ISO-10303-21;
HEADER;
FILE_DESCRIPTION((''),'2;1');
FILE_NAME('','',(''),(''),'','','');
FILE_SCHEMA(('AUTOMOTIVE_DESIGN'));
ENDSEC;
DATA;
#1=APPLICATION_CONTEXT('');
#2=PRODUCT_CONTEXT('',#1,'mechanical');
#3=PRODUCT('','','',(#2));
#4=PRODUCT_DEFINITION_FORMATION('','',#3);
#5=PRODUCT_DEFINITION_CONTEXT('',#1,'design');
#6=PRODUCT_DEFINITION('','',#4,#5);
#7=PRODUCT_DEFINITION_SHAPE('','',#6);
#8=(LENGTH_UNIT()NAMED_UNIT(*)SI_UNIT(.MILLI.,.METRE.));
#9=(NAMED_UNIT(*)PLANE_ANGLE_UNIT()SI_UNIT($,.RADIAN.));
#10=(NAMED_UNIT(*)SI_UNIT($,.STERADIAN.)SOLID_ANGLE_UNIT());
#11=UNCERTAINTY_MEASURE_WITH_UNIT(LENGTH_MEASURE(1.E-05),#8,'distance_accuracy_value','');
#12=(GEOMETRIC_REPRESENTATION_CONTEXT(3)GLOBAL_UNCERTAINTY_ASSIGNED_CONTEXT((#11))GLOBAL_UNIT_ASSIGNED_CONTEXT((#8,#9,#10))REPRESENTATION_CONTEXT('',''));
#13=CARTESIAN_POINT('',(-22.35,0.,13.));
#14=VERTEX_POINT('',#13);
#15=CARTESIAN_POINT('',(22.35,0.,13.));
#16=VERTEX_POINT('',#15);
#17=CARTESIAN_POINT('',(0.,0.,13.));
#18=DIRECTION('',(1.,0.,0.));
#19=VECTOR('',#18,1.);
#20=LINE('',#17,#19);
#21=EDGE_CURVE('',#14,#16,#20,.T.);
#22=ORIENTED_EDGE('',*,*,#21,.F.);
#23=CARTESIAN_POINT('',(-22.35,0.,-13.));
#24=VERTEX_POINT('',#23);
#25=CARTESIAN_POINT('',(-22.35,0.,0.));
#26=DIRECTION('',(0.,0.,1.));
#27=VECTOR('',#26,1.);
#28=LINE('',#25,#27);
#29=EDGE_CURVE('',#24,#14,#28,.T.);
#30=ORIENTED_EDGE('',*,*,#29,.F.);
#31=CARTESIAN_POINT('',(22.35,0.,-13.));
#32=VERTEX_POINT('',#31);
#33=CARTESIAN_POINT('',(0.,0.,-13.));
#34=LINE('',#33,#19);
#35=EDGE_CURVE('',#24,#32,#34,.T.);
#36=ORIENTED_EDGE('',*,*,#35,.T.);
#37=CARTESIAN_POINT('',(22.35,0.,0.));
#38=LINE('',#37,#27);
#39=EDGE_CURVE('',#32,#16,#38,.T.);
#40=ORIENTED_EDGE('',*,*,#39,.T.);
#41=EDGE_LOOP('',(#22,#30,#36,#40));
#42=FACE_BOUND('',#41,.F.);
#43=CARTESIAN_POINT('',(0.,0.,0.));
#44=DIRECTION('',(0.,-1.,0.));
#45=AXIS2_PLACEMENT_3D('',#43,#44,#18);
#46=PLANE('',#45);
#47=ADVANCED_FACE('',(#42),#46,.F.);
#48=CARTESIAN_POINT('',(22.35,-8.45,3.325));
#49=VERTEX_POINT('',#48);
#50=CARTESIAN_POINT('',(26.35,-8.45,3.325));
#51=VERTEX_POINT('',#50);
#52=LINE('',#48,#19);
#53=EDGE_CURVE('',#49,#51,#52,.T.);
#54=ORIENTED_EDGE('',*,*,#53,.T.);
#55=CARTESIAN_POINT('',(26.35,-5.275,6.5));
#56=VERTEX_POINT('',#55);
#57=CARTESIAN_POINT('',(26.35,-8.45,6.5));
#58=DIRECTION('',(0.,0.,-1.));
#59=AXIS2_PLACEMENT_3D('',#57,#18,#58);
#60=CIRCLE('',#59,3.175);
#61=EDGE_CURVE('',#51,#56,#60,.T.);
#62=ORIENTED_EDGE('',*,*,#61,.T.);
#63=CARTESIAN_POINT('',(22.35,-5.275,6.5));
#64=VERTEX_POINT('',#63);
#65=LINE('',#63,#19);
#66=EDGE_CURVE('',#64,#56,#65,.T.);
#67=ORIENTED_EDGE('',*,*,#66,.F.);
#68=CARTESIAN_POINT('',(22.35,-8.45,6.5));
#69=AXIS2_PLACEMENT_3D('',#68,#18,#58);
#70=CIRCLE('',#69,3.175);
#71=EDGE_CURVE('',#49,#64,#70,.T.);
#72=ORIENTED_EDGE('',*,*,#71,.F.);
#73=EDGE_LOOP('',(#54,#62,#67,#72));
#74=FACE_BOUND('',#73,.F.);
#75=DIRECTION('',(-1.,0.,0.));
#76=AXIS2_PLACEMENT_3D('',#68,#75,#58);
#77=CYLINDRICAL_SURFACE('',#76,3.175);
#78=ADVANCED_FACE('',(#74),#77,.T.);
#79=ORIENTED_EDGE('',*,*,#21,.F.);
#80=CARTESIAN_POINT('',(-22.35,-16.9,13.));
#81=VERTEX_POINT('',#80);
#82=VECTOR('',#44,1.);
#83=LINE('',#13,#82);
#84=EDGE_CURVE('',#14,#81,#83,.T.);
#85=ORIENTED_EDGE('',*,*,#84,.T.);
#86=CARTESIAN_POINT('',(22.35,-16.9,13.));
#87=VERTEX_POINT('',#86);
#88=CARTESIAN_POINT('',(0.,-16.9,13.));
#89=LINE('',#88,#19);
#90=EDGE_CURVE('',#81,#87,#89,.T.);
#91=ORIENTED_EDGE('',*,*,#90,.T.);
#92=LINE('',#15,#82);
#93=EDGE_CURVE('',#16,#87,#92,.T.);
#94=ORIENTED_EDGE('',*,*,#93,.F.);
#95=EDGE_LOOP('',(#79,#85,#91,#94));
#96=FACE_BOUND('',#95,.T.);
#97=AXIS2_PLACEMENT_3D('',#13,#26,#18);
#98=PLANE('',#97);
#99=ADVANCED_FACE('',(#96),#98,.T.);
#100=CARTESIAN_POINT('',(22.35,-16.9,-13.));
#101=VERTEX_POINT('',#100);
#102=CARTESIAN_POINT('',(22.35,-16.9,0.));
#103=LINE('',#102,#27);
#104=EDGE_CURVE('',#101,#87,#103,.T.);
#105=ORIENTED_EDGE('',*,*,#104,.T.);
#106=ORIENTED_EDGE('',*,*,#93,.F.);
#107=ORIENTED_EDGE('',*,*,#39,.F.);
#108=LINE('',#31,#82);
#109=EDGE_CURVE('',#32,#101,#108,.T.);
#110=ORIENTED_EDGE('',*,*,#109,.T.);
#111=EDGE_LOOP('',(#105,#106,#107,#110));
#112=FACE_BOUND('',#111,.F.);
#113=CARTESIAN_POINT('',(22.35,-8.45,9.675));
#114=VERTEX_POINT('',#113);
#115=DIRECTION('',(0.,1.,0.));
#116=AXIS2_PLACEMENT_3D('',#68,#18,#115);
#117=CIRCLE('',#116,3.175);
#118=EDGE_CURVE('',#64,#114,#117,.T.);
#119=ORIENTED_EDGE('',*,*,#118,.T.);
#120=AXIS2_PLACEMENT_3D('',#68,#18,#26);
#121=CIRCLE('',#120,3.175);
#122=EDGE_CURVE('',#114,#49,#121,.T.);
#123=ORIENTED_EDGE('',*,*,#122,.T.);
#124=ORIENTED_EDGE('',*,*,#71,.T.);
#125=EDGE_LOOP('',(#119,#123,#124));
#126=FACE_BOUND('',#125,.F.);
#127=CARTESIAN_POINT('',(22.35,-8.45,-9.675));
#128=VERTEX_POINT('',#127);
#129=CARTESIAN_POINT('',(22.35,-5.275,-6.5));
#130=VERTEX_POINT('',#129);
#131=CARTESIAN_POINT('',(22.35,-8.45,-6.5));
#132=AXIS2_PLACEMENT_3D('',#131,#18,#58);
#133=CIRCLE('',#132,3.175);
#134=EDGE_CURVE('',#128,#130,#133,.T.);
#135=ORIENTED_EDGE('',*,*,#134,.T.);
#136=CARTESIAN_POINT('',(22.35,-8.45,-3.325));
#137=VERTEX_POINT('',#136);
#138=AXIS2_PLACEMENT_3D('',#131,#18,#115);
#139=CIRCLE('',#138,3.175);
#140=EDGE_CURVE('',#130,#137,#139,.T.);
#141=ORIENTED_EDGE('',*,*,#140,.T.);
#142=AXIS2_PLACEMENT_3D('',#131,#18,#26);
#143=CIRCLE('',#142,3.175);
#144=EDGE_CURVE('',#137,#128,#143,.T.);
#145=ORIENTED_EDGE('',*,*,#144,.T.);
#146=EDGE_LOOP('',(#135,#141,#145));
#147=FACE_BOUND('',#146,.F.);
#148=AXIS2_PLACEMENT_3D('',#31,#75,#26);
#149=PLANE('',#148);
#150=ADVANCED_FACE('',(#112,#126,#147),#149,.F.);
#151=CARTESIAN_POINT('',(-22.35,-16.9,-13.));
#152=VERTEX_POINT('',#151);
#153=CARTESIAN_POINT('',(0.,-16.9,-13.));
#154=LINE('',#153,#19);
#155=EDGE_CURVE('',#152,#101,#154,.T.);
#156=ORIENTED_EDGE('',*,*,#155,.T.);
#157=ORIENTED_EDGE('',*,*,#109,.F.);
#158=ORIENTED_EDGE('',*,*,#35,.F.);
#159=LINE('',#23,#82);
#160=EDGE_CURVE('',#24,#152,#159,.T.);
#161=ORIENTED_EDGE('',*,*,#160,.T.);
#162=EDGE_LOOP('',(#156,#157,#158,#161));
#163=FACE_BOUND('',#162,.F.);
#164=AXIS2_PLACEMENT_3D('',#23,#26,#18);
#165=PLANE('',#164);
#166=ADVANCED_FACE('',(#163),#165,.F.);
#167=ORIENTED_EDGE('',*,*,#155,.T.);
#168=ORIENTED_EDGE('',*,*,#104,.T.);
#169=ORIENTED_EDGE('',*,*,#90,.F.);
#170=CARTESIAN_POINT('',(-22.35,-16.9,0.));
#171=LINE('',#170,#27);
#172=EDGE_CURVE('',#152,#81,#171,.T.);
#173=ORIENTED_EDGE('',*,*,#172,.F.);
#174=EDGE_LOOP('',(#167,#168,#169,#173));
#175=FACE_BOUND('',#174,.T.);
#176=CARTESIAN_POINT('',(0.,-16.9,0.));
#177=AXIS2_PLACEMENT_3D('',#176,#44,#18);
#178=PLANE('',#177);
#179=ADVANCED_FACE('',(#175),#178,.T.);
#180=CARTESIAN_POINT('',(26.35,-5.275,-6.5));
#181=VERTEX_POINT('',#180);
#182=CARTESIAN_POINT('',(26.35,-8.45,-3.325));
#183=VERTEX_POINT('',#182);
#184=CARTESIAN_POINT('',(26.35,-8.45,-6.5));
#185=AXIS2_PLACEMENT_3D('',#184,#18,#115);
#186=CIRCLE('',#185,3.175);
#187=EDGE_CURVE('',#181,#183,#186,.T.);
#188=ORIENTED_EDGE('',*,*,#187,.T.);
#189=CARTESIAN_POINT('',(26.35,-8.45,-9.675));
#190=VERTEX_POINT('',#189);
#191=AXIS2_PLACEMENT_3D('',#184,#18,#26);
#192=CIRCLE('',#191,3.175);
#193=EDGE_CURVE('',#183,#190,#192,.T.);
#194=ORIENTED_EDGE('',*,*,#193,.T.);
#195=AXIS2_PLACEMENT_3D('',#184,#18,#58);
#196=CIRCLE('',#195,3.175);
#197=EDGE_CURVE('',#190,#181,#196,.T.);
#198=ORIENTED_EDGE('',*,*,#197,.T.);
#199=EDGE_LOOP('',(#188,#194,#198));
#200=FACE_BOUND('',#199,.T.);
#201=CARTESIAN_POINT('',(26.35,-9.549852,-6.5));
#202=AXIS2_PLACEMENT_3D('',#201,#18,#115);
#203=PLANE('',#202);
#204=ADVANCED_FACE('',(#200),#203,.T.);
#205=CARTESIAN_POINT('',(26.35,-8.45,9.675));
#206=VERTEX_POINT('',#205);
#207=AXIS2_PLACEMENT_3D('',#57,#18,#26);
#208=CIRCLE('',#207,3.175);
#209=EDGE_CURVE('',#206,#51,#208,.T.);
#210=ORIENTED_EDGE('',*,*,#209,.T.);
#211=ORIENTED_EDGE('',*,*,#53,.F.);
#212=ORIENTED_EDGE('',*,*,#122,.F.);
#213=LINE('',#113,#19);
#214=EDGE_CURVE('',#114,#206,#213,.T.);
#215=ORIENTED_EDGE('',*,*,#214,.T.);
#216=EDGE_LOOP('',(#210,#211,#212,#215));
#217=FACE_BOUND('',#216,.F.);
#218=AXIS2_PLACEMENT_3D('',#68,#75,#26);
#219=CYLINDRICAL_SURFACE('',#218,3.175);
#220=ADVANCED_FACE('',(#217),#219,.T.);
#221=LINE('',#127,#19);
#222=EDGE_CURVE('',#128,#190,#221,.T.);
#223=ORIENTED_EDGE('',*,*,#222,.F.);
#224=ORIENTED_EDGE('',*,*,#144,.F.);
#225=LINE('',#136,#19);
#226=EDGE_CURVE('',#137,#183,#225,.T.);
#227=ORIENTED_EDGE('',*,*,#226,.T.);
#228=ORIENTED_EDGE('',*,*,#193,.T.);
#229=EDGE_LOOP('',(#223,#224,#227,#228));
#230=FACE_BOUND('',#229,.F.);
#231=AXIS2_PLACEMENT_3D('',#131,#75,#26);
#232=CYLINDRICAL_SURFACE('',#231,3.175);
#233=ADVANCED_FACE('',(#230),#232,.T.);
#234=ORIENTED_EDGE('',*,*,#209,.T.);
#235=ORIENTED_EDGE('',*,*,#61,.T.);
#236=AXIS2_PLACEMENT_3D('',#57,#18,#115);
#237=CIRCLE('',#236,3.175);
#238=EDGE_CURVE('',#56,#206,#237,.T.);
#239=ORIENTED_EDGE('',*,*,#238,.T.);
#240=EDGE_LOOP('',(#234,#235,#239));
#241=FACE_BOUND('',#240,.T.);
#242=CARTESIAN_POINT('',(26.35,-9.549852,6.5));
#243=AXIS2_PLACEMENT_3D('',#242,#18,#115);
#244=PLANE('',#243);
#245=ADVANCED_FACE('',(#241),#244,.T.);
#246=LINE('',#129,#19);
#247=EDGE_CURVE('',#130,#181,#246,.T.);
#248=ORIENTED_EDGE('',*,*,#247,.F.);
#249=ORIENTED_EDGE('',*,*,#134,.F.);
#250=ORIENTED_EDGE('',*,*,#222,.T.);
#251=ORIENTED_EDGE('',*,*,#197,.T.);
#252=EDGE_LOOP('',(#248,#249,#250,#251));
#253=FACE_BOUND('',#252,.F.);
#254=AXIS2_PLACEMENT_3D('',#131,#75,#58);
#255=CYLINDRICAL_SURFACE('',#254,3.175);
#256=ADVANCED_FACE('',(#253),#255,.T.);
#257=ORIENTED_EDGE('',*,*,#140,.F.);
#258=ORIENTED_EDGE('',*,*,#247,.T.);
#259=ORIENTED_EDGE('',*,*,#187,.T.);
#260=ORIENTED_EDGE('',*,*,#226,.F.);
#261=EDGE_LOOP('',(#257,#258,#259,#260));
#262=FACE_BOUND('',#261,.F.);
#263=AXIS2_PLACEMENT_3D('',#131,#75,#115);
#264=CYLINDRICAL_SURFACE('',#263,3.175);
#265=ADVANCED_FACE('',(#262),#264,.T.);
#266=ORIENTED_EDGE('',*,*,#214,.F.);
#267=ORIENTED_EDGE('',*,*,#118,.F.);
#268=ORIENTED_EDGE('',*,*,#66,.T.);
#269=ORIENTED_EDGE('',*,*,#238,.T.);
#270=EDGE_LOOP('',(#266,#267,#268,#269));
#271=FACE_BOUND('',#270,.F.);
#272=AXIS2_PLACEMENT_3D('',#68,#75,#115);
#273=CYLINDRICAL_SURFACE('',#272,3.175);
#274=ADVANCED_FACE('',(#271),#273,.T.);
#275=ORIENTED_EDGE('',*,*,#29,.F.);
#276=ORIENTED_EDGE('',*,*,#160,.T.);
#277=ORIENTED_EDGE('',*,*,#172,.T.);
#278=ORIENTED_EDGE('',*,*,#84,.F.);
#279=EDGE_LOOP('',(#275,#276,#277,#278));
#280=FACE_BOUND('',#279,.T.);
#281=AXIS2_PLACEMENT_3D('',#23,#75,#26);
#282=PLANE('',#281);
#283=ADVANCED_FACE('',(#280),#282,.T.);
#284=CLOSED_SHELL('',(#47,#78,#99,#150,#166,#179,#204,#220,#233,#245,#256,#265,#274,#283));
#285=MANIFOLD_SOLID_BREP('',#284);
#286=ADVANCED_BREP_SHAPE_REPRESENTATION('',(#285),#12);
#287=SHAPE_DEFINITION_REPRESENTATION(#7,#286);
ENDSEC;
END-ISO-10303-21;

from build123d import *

# Parameters (mm, degrees)
F0_W     = 44.7
F0_H     = 26
F1_DEPTH = 16.9
F3_DEPTH = 4


with BuildPart() as f1:
    # F0 (on Front) → F1 (new body)
    with BuildSketch(Plane.XZ):
        Rectangle(F0_W, F0_H)
    extrude(amount=F1_DEPTH)

    # F2 (on face) → F3 (join)
    with BuildSketch(Plane.YZ.offset(22.35)):
        with BuildLine():
            ThreePointArc((-8.45, -3.325), (-11.625, -6.5), (-8.45, -9.675))
            Line((-8.45, -9.675), (-8.45, -3.325))
        make_face()
        with BuildLine():
            Line((-8.45, -3.325), (-8.45, -9.675))
            ThreePointArc((-8.45, -9.675), (-6.2049359697, -8.7450640303), (-5.275, -6.5))
            ThreePointArc((-5.275, -6.5), (-6.2049359697, -4.2549359697), (-8.45, -3.325))
        make_face()
        with BuildLine():
            ThreePointArc((-8.45, 9.675), (-11.625, 6.5), (-8.45, 3.325))
            Line((-8.45, 3.325), (-8.45, 6.5))
            Line((-8.45, 6.5), (-8.45, 9.675))
        make_face()
        with BuildLine():
            Line((-8.45, 6.5), (-8.45, 3.325))
            ThreePointArc((-8.45, 3.325), (-6.2049359697, 4.2549359697), (-5.275, 6.5))
            ThreePointArc((-5.275, 6.5), (-6.2049359697, 8.7450640303), (-8.45, 9.675))
            Line((-8.45, 9.675), (-8.45, 6.5))
        make_face()
    extrude(amount=F3_DEPTH)


solid = f1.part
